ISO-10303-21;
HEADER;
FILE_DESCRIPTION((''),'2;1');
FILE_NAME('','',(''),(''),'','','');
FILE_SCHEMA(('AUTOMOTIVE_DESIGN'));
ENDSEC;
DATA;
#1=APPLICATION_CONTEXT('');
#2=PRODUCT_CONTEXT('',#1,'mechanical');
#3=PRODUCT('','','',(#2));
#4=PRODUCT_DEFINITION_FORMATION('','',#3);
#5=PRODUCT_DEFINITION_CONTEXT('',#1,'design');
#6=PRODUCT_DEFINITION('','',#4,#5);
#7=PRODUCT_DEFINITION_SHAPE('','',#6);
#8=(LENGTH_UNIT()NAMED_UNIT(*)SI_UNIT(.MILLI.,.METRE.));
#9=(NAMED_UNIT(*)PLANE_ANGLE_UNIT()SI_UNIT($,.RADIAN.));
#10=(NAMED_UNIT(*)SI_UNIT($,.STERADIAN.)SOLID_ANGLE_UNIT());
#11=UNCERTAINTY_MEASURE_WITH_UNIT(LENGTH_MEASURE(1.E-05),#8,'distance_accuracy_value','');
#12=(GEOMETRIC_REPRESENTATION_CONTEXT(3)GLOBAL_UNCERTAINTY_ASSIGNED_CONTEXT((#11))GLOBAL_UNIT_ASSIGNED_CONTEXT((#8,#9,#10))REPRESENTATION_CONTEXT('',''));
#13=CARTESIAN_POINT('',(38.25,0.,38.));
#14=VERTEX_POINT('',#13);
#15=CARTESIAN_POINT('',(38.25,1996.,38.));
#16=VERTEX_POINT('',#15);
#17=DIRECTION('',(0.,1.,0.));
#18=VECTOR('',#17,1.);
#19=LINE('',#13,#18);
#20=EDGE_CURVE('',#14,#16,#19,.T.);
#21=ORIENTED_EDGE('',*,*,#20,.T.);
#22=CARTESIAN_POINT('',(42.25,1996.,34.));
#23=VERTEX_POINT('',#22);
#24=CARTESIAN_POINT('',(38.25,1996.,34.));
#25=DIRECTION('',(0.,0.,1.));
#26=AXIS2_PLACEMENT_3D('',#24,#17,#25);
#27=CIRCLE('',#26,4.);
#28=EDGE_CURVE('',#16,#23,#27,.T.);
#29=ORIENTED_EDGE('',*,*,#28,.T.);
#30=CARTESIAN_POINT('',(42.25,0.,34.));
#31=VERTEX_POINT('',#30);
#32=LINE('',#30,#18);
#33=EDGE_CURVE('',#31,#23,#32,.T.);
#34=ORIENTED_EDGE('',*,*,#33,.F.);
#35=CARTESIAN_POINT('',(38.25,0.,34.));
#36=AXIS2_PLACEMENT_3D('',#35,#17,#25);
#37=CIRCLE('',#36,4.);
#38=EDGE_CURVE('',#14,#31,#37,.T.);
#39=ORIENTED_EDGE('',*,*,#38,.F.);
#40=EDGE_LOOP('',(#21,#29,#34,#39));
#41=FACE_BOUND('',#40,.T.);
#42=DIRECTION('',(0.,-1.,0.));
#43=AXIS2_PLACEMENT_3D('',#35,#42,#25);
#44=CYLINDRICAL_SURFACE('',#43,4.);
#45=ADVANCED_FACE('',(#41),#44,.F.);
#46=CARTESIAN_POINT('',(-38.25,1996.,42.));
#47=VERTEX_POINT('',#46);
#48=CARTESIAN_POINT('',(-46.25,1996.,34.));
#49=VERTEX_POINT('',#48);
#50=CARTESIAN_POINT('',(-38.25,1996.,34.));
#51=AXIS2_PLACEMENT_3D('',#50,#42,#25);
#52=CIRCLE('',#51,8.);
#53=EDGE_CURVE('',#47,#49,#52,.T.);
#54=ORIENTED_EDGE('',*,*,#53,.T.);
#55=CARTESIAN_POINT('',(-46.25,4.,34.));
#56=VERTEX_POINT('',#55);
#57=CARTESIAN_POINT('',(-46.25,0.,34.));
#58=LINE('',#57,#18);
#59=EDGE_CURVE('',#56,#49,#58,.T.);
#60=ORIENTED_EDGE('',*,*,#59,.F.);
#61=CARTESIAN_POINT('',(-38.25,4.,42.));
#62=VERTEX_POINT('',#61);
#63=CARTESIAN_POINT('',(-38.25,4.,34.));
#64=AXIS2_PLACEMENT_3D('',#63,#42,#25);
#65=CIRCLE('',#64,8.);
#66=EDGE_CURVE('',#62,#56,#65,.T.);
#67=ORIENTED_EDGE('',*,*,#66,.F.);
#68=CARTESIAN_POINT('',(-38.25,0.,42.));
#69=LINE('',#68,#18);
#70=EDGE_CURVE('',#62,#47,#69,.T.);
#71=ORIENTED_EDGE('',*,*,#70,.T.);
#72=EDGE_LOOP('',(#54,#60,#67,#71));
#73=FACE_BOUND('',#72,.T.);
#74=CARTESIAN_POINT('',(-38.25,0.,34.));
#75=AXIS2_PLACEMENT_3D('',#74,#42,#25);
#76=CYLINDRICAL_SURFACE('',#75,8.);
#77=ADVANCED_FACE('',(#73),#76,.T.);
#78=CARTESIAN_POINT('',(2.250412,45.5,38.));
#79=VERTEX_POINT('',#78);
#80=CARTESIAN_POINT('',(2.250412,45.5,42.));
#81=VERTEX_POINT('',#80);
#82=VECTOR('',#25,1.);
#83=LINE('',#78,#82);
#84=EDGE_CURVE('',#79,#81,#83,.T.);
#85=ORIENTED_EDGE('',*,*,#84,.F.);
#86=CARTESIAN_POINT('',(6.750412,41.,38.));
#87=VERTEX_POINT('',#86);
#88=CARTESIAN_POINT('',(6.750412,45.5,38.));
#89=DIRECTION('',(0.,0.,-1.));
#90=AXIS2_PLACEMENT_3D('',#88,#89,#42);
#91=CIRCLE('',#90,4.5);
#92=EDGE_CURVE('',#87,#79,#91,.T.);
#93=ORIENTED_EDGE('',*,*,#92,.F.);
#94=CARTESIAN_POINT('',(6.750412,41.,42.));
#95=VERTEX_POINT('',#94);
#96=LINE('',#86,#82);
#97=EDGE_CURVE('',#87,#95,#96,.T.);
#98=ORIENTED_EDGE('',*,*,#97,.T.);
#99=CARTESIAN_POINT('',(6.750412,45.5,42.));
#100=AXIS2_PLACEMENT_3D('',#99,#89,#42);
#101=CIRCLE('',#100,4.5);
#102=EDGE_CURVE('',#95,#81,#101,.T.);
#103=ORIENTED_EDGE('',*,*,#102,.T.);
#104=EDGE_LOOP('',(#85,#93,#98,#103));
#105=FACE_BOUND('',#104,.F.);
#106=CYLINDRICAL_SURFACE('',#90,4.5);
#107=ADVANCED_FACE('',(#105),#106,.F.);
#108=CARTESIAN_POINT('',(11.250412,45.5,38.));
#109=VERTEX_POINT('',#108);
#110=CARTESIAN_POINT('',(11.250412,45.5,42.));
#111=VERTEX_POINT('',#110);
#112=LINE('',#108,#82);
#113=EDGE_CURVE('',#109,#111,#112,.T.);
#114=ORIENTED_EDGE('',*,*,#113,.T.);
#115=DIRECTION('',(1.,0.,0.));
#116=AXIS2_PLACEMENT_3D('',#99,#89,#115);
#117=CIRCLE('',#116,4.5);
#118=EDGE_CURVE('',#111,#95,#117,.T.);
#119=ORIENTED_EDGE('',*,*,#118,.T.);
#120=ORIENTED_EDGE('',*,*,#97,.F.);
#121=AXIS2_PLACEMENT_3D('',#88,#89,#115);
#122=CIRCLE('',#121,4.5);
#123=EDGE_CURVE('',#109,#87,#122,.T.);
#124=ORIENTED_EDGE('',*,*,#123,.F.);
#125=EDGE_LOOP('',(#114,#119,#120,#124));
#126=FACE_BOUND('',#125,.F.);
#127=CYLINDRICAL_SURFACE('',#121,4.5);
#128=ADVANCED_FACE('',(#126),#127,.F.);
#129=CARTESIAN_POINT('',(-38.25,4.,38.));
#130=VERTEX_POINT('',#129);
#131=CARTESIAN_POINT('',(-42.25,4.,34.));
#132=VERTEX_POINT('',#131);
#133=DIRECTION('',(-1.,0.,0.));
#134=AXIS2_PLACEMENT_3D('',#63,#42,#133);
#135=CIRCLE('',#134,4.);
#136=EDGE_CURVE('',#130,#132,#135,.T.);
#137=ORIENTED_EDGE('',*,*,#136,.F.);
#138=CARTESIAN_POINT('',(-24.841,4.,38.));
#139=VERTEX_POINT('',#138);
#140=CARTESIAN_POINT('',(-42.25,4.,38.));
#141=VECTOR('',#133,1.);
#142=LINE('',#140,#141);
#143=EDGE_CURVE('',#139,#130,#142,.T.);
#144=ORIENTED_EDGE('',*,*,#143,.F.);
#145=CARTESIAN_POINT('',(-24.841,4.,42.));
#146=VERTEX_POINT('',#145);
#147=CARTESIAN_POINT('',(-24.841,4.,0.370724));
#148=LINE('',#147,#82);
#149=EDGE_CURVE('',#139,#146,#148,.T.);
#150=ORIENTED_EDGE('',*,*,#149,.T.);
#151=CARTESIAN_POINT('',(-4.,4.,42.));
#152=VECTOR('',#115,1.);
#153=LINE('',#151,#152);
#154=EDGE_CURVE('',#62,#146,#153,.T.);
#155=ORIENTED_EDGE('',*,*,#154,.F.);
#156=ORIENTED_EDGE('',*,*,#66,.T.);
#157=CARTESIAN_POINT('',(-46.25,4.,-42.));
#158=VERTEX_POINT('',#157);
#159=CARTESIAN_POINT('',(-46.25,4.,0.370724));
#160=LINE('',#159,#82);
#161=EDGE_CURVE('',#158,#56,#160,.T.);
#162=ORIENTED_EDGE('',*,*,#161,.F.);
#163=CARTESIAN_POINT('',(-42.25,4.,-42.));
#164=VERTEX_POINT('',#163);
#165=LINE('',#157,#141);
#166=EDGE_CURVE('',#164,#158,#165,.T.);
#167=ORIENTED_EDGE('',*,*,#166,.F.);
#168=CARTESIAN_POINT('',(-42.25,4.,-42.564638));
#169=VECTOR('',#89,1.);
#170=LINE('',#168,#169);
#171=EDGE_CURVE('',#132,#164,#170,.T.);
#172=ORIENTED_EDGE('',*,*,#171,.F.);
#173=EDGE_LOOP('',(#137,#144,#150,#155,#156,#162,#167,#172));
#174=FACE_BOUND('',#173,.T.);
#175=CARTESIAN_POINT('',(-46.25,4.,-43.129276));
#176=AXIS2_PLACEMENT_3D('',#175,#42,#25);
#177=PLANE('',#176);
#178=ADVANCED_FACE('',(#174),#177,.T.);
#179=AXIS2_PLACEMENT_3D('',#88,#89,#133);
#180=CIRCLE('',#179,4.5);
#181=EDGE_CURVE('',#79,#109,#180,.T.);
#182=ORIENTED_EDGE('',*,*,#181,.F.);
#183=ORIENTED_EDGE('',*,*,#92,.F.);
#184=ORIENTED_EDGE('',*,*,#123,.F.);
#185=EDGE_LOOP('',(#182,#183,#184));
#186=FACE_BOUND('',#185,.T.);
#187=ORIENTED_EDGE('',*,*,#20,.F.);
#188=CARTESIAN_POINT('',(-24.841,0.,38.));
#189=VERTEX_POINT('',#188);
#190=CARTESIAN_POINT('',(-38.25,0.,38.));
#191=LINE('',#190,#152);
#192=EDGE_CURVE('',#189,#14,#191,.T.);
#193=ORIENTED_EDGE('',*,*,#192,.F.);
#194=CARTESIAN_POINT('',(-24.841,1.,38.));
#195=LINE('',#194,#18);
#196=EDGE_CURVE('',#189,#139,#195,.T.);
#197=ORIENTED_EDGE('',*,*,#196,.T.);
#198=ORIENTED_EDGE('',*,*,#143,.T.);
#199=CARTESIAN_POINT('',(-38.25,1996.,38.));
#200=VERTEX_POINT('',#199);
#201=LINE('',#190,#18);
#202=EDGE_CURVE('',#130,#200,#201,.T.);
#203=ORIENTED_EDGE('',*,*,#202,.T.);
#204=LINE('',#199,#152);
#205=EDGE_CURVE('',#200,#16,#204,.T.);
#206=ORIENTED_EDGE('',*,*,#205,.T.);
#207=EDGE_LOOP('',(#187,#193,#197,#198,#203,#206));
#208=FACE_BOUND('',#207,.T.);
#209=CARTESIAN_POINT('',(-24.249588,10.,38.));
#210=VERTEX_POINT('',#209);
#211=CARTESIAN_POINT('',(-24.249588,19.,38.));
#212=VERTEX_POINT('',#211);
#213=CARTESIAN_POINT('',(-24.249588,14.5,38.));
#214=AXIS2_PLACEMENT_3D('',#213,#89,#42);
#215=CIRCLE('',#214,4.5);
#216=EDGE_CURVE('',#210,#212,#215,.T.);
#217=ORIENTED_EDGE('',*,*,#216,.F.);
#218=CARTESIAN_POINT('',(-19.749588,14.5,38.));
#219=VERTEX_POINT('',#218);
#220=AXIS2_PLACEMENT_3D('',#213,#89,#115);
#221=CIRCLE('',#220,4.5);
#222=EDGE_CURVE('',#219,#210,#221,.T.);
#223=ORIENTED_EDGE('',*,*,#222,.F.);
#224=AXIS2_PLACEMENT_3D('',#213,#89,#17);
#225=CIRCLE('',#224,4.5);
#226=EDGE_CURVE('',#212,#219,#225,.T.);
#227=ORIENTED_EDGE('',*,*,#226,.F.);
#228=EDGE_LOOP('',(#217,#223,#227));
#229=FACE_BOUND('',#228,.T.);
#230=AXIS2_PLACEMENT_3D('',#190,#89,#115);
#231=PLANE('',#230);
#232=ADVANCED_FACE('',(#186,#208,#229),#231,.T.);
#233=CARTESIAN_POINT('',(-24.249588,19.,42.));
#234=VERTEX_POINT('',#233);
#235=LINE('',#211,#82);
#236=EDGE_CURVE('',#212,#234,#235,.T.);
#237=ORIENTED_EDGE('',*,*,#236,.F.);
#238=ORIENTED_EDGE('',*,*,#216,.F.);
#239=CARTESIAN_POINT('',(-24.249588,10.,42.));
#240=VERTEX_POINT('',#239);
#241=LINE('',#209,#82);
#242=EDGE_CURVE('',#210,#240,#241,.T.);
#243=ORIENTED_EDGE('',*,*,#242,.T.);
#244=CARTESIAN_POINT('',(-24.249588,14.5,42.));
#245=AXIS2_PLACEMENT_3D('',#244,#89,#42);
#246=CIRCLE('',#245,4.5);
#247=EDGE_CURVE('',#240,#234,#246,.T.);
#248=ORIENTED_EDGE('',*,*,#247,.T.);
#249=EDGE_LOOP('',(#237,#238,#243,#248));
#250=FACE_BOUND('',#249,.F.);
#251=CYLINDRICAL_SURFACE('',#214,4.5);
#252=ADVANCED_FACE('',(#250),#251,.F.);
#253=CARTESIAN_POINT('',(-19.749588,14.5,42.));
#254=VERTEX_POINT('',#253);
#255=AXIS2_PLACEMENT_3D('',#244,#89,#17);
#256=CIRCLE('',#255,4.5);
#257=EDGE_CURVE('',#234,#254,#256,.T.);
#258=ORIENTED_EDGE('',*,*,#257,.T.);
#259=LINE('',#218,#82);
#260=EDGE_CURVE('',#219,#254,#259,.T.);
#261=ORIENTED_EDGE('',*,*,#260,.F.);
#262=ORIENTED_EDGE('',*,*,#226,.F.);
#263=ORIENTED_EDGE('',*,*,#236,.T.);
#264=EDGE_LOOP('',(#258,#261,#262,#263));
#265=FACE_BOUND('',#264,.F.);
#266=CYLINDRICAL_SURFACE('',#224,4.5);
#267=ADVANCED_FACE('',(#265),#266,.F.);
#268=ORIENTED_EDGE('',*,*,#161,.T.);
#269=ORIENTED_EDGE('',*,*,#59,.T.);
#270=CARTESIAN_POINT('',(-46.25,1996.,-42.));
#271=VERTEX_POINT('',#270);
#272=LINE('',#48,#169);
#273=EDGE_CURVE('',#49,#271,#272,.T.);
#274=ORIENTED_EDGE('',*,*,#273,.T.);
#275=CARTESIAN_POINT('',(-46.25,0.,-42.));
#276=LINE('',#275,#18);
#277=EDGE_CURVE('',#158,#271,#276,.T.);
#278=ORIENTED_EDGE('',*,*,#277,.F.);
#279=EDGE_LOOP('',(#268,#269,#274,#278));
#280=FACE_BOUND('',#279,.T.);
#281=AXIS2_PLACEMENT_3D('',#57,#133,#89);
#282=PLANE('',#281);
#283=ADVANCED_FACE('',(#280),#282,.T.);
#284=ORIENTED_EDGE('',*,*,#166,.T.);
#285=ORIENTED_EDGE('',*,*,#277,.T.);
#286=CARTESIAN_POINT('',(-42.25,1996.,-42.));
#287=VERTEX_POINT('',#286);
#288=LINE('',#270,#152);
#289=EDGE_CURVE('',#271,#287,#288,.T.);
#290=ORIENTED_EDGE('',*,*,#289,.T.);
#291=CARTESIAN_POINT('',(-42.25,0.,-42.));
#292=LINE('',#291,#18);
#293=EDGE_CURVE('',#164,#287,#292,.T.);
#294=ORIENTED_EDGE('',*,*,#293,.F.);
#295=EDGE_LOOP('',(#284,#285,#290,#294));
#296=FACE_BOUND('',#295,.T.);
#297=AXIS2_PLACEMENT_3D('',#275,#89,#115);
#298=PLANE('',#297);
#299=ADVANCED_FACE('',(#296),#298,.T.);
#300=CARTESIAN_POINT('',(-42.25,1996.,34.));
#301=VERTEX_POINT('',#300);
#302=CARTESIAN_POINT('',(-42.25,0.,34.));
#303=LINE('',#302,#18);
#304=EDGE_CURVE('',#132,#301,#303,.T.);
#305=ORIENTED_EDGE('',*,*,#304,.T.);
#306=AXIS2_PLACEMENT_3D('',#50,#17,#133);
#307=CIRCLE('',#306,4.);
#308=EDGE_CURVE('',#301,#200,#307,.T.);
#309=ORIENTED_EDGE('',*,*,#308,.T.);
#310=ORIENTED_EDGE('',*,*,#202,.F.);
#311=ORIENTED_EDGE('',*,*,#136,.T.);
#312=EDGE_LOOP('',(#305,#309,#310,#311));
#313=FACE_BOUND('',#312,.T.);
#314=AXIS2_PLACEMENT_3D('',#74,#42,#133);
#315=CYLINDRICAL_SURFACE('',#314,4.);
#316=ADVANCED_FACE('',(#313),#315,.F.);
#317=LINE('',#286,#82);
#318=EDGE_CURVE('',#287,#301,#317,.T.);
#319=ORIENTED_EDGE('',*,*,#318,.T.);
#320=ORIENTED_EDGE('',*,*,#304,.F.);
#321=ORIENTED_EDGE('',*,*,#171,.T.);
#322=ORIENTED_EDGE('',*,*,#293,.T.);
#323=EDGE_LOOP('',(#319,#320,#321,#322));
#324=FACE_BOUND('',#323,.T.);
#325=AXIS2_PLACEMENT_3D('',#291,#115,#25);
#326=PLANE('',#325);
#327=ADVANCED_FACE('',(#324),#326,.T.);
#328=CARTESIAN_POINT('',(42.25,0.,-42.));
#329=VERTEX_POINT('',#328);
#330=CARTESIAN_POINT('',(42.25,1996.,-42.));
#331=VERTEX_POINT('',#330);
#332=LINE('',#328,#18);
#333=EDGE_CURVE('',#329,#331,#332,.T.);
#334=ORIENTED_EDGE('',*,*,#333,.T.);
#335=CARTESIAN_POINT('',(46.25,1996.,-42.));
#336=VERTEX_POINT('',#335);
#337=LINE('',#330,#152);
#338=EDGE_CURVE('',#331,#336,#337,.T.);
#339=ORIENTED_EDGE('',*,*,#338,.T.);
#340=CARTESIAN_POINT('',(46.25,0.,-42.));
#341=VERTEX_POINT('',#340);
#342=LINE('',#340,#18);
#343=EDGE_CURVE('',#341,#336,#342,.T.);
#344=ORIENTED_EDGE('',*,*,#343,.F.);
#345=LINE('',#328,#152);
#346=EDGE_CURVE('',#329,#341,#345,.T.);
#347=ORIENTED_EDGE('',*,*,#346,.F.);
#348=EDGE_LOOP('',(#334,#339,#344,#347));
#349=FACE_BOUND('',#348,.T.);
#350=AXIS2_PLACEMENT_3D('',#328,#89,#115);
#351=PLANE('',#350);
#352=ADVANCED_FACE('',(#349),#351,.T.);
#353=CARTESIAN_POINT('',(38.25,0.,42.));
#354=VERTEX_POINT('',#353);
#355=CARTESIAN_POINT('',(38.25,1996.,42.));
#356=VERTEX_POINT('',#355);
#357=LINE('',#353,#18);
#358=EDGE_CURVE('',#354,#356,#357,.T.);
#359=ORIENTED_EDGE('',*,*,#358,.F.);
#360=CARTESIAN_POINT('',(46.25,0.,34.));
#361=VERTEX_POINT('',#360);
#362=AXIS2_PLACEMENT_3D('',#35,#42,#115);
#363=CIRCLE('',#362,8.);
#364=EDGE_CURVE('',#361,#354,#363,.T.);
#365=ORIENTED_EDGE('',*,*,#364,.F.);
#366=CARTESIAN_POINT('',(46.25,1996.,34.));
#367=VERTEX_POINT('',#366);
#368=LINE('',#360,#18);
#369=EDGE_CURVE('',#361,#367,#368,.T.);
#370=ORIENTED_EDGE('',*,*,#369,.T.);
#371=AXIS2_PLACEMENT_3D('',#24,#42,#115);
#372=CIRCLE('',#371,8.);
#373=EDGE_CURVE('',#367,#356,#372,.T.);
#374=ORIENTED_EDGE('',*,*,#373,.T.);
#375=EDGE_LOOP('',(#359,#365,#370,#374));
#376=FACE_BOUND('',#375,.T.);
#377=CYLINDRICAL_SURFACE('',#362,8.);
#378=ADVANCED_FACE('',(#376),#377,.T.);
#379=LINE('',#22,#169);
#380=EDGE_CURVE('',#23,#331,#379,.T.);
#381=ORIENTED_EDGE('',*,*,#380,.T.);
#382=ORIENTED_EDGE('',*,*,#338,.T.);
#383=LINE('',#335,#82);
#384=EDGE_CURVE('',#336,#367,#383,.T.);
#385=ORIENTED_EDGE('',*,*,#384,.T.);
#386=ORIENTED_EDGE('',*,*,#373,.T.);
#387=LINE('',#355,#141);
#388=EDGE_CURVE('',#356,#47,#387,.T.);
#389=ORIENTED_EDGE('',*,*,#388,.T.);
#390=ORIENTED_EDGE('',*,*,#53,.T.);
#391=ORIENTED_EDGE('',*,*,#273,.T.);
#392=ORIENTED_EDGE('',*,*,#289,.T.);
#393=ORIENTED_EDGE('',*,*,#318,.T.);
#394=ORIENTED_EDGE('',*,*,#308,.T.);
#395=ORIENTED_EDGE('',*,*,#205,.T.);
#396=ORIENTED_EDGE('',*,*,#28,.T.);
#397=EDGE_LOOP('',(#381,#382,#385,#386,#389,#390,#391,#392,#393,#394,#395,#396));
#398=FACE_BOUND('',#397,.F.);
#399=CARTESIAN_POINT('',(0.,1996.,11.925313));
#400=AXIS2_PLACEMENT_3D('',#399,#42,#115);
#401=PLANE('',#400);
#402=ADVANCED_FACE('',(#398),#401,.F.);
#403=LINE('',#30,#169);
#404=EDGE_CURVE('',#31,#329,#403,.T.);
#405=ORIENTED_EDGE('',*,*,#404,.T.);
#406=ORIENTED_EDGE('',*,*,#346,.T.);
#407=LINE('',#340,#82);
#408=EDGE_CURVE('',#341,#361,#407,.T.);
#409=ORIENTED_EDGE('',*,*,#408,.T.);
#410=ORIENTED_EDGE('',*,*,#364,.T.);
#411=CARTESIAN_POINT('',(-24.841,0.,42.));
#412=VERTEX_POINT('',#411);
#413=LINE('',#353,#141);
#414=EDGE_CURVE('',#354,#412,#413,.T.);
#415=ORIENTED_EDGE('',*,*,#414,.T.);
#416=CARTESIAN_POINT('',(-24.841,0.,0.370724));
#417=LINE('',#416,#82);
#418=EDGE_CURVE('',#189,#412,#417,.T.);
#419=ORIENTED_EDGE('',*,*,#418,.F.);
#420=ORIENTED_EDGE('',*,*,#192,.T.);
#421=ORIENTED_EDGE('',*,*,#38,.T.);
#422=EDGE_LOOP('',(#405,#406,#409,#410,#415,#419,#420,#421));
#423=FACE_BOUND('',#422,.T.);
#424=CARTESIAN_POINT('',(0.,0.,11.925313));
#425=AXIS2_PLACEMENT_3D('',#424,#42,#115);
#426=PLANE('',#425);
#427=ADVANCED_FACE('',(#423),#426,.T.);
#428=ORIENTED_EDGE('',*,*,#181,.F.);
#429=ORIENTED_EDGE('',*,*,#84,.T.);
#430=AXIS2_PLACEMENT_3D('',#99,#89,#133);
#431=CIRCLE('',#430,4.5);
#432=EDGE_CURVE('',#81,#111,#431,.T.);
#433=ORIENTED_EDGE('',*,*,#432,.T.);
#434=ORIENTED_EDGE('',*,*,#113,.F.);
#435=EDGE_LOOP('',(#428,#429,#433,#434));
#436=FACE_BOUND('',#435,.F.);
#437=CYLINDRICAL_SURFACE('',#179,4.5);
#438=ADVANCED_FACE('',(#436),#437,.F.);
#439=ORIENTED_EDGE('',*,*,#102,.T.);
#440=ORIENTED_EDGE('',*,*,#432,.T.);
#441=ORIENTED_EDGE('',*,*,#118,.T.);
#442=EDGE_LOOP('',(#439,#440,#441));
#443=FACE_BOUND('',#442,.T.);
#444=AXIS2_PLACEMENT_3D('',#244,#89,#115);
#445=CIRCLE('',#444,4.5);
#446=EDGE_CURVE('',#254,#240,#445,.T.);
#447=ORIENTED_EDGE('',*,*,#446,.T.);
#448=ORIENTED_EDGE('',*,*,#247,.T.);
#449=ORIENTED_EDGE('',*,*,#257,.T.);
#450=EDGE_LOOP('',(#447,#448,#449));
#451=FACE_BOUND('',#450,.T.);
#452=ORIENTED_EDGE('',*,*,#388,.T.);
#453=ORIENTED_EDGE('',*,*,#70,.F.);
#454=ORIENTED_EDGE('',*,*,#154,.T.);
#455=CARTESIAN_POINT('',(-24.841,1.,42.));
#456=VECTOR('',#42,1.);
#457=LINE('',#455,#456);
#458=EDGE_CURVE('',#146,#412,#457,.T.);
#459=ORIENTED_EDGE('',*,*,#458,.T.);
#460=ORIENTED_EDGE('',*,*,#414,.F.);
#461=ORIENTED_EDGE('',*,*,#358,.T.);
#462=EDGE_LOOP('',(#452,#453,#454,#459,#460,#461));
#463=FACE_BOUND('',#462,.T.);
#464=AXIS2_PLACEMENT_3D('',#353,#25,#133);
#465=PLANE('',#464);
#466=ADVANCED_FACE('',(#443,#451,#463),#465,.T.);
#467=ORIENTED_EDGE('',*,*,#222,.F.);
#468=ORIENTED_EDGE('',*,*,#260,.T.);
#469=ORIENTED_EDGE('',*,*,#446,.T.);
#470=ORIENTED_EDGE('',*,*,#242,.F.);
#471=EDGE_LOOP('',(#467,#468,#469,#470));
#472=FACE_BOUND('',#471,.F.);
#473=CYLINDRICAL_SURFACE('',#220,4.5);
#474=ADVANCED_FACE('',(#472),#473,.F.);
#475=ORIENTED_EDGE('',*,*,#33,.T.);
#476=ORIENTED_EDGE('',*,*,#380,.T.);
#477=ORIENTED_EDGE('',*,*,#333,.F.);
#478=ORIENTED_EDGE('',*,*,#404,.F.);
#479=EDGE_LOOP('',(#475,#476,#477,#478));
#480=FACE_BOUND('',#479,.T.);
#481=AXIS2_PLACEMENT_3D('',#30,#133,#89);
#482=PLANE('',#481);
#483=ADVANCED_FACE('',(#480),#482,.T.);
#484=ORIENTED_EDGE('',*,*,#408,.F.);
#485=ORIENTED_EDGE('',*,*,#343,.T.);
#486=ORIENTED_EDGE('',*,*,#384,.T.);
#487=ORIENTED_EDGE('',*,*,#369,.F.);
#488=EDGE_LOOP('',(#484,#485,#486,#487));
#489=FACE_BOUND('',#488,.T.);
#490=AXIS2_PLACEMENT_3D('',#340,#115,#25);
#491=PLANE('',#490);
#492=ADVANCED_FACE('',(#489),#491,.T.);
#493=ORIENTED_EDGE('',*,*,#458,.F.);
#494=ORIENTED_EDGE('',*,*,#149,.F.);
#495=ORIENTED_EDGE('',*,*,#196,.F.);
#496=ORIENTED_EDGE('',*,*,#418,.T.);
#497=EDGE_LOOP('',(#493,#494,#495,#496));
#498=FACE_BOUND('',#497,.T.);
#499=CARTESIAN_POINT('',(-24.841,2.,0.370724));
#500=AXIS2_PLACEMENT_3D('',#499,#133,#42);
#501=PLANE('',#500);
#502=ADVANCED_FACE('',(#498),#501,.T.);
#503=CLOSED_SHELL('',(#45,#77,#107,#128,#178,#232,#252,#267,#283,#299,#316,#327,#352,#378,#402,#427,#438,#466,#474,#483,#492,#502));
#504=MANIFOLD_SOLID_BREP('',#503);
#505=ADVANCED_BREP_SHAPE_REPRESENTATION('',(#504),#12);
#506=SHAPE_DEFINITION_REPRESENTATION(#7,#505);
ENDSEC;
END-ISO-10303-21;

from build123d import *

# Parameters (mm, degrees)
F1_DEPTH = 1996
F3_W     = 4
F3_H     = 87
F4_DEPTH = 21.409
F6_DEPTH = 4.001


with BuildPart() as f1:
    # F0 (on Front) → F1 (new body)
    with BuildSketch(Plane.XZ):
        with BuildLine():
            Line((-46.25, 34), (-46.25, -42))
            Line((-46.25, -42), (-42.25, -42))
            Line((-42.25, -42), (-42.25, 34))
            ThreePointArc((-42.25, 34), (-41.0784271247, 36.8284271247), (-38.25, 38))
            Line((-38.25, 38), (38.25, 38))
            ThreePointArc((38.25, 38), (41.0784271247, 36.8284271247), (42.25, 34))
            Line((42.25, 34), (42.25, -42))
            Line((42.25, -42), (46.25, -42))
            Line((46.25, -42), (46.25, 34))
            ThreePointArc((46.25, 34), (43.9068542495, 39.6568542495), (38.25, 42))
            Line((38.25, 42), (-38.25, 42))
            ThreePointArc((-38.25, 42), (-43.9068542495, 39.6568542495), (-46.25, 34))
        make_face()
    extrude(amount=-F1_DEPTH)

    # F3 (on face) → F4 (cut)
    with BuildSketch(Plane(origin=(-46.25, 0, 0), x_dir=(0, -1, 0), z_dir=(-1, 0, 0))):
        with Locations((-2, 0.3707238951)):
            Rectangle(F3_W, F3_H)
    extrude(amount=-F4_DEPTH, mode=Mode.SUBTRACT)

    # F5 (on face) → F6 (cut, through all)
    with BuildSketch(Plane(origin=(0, 0, 38), x_dir=(1, 0, 0), z_dir=(0, 0, -1))):
        with BuildLine():
            ThreePointArc((-19.7495876579, -14.5), (-21.0676071426, -11.3180194847), (-24.2495876579, -10))
            ThreePointArc((-24.2495876579, -10), (-28.7495876579, -14.5), (-24.2495876579, -19))
            ThreePointArc((-24.2495876579, -19), (-21.0676071426, -17.6819805153), (-19.7495876579, -14.5))
        make_face()
        with BuildLine():
            ThreePointArc((11.2504123421, -45.5), (9.9323928574, -42.3180194847), (6.7504123421, -41))
            ThreePointArc((6.7504123421, -41), (3.5684318267, -42.3180194847), (2.2504123421, -45.5))
            ThreePointArc((2.2504123421, -45.5), (6.7504123421, -50), (11.2504123421, -45.5))
        make_face()
    extrude(amount=-F6_DEPTH, mode=Mode.SUBTRACT)


solid = f1.part
